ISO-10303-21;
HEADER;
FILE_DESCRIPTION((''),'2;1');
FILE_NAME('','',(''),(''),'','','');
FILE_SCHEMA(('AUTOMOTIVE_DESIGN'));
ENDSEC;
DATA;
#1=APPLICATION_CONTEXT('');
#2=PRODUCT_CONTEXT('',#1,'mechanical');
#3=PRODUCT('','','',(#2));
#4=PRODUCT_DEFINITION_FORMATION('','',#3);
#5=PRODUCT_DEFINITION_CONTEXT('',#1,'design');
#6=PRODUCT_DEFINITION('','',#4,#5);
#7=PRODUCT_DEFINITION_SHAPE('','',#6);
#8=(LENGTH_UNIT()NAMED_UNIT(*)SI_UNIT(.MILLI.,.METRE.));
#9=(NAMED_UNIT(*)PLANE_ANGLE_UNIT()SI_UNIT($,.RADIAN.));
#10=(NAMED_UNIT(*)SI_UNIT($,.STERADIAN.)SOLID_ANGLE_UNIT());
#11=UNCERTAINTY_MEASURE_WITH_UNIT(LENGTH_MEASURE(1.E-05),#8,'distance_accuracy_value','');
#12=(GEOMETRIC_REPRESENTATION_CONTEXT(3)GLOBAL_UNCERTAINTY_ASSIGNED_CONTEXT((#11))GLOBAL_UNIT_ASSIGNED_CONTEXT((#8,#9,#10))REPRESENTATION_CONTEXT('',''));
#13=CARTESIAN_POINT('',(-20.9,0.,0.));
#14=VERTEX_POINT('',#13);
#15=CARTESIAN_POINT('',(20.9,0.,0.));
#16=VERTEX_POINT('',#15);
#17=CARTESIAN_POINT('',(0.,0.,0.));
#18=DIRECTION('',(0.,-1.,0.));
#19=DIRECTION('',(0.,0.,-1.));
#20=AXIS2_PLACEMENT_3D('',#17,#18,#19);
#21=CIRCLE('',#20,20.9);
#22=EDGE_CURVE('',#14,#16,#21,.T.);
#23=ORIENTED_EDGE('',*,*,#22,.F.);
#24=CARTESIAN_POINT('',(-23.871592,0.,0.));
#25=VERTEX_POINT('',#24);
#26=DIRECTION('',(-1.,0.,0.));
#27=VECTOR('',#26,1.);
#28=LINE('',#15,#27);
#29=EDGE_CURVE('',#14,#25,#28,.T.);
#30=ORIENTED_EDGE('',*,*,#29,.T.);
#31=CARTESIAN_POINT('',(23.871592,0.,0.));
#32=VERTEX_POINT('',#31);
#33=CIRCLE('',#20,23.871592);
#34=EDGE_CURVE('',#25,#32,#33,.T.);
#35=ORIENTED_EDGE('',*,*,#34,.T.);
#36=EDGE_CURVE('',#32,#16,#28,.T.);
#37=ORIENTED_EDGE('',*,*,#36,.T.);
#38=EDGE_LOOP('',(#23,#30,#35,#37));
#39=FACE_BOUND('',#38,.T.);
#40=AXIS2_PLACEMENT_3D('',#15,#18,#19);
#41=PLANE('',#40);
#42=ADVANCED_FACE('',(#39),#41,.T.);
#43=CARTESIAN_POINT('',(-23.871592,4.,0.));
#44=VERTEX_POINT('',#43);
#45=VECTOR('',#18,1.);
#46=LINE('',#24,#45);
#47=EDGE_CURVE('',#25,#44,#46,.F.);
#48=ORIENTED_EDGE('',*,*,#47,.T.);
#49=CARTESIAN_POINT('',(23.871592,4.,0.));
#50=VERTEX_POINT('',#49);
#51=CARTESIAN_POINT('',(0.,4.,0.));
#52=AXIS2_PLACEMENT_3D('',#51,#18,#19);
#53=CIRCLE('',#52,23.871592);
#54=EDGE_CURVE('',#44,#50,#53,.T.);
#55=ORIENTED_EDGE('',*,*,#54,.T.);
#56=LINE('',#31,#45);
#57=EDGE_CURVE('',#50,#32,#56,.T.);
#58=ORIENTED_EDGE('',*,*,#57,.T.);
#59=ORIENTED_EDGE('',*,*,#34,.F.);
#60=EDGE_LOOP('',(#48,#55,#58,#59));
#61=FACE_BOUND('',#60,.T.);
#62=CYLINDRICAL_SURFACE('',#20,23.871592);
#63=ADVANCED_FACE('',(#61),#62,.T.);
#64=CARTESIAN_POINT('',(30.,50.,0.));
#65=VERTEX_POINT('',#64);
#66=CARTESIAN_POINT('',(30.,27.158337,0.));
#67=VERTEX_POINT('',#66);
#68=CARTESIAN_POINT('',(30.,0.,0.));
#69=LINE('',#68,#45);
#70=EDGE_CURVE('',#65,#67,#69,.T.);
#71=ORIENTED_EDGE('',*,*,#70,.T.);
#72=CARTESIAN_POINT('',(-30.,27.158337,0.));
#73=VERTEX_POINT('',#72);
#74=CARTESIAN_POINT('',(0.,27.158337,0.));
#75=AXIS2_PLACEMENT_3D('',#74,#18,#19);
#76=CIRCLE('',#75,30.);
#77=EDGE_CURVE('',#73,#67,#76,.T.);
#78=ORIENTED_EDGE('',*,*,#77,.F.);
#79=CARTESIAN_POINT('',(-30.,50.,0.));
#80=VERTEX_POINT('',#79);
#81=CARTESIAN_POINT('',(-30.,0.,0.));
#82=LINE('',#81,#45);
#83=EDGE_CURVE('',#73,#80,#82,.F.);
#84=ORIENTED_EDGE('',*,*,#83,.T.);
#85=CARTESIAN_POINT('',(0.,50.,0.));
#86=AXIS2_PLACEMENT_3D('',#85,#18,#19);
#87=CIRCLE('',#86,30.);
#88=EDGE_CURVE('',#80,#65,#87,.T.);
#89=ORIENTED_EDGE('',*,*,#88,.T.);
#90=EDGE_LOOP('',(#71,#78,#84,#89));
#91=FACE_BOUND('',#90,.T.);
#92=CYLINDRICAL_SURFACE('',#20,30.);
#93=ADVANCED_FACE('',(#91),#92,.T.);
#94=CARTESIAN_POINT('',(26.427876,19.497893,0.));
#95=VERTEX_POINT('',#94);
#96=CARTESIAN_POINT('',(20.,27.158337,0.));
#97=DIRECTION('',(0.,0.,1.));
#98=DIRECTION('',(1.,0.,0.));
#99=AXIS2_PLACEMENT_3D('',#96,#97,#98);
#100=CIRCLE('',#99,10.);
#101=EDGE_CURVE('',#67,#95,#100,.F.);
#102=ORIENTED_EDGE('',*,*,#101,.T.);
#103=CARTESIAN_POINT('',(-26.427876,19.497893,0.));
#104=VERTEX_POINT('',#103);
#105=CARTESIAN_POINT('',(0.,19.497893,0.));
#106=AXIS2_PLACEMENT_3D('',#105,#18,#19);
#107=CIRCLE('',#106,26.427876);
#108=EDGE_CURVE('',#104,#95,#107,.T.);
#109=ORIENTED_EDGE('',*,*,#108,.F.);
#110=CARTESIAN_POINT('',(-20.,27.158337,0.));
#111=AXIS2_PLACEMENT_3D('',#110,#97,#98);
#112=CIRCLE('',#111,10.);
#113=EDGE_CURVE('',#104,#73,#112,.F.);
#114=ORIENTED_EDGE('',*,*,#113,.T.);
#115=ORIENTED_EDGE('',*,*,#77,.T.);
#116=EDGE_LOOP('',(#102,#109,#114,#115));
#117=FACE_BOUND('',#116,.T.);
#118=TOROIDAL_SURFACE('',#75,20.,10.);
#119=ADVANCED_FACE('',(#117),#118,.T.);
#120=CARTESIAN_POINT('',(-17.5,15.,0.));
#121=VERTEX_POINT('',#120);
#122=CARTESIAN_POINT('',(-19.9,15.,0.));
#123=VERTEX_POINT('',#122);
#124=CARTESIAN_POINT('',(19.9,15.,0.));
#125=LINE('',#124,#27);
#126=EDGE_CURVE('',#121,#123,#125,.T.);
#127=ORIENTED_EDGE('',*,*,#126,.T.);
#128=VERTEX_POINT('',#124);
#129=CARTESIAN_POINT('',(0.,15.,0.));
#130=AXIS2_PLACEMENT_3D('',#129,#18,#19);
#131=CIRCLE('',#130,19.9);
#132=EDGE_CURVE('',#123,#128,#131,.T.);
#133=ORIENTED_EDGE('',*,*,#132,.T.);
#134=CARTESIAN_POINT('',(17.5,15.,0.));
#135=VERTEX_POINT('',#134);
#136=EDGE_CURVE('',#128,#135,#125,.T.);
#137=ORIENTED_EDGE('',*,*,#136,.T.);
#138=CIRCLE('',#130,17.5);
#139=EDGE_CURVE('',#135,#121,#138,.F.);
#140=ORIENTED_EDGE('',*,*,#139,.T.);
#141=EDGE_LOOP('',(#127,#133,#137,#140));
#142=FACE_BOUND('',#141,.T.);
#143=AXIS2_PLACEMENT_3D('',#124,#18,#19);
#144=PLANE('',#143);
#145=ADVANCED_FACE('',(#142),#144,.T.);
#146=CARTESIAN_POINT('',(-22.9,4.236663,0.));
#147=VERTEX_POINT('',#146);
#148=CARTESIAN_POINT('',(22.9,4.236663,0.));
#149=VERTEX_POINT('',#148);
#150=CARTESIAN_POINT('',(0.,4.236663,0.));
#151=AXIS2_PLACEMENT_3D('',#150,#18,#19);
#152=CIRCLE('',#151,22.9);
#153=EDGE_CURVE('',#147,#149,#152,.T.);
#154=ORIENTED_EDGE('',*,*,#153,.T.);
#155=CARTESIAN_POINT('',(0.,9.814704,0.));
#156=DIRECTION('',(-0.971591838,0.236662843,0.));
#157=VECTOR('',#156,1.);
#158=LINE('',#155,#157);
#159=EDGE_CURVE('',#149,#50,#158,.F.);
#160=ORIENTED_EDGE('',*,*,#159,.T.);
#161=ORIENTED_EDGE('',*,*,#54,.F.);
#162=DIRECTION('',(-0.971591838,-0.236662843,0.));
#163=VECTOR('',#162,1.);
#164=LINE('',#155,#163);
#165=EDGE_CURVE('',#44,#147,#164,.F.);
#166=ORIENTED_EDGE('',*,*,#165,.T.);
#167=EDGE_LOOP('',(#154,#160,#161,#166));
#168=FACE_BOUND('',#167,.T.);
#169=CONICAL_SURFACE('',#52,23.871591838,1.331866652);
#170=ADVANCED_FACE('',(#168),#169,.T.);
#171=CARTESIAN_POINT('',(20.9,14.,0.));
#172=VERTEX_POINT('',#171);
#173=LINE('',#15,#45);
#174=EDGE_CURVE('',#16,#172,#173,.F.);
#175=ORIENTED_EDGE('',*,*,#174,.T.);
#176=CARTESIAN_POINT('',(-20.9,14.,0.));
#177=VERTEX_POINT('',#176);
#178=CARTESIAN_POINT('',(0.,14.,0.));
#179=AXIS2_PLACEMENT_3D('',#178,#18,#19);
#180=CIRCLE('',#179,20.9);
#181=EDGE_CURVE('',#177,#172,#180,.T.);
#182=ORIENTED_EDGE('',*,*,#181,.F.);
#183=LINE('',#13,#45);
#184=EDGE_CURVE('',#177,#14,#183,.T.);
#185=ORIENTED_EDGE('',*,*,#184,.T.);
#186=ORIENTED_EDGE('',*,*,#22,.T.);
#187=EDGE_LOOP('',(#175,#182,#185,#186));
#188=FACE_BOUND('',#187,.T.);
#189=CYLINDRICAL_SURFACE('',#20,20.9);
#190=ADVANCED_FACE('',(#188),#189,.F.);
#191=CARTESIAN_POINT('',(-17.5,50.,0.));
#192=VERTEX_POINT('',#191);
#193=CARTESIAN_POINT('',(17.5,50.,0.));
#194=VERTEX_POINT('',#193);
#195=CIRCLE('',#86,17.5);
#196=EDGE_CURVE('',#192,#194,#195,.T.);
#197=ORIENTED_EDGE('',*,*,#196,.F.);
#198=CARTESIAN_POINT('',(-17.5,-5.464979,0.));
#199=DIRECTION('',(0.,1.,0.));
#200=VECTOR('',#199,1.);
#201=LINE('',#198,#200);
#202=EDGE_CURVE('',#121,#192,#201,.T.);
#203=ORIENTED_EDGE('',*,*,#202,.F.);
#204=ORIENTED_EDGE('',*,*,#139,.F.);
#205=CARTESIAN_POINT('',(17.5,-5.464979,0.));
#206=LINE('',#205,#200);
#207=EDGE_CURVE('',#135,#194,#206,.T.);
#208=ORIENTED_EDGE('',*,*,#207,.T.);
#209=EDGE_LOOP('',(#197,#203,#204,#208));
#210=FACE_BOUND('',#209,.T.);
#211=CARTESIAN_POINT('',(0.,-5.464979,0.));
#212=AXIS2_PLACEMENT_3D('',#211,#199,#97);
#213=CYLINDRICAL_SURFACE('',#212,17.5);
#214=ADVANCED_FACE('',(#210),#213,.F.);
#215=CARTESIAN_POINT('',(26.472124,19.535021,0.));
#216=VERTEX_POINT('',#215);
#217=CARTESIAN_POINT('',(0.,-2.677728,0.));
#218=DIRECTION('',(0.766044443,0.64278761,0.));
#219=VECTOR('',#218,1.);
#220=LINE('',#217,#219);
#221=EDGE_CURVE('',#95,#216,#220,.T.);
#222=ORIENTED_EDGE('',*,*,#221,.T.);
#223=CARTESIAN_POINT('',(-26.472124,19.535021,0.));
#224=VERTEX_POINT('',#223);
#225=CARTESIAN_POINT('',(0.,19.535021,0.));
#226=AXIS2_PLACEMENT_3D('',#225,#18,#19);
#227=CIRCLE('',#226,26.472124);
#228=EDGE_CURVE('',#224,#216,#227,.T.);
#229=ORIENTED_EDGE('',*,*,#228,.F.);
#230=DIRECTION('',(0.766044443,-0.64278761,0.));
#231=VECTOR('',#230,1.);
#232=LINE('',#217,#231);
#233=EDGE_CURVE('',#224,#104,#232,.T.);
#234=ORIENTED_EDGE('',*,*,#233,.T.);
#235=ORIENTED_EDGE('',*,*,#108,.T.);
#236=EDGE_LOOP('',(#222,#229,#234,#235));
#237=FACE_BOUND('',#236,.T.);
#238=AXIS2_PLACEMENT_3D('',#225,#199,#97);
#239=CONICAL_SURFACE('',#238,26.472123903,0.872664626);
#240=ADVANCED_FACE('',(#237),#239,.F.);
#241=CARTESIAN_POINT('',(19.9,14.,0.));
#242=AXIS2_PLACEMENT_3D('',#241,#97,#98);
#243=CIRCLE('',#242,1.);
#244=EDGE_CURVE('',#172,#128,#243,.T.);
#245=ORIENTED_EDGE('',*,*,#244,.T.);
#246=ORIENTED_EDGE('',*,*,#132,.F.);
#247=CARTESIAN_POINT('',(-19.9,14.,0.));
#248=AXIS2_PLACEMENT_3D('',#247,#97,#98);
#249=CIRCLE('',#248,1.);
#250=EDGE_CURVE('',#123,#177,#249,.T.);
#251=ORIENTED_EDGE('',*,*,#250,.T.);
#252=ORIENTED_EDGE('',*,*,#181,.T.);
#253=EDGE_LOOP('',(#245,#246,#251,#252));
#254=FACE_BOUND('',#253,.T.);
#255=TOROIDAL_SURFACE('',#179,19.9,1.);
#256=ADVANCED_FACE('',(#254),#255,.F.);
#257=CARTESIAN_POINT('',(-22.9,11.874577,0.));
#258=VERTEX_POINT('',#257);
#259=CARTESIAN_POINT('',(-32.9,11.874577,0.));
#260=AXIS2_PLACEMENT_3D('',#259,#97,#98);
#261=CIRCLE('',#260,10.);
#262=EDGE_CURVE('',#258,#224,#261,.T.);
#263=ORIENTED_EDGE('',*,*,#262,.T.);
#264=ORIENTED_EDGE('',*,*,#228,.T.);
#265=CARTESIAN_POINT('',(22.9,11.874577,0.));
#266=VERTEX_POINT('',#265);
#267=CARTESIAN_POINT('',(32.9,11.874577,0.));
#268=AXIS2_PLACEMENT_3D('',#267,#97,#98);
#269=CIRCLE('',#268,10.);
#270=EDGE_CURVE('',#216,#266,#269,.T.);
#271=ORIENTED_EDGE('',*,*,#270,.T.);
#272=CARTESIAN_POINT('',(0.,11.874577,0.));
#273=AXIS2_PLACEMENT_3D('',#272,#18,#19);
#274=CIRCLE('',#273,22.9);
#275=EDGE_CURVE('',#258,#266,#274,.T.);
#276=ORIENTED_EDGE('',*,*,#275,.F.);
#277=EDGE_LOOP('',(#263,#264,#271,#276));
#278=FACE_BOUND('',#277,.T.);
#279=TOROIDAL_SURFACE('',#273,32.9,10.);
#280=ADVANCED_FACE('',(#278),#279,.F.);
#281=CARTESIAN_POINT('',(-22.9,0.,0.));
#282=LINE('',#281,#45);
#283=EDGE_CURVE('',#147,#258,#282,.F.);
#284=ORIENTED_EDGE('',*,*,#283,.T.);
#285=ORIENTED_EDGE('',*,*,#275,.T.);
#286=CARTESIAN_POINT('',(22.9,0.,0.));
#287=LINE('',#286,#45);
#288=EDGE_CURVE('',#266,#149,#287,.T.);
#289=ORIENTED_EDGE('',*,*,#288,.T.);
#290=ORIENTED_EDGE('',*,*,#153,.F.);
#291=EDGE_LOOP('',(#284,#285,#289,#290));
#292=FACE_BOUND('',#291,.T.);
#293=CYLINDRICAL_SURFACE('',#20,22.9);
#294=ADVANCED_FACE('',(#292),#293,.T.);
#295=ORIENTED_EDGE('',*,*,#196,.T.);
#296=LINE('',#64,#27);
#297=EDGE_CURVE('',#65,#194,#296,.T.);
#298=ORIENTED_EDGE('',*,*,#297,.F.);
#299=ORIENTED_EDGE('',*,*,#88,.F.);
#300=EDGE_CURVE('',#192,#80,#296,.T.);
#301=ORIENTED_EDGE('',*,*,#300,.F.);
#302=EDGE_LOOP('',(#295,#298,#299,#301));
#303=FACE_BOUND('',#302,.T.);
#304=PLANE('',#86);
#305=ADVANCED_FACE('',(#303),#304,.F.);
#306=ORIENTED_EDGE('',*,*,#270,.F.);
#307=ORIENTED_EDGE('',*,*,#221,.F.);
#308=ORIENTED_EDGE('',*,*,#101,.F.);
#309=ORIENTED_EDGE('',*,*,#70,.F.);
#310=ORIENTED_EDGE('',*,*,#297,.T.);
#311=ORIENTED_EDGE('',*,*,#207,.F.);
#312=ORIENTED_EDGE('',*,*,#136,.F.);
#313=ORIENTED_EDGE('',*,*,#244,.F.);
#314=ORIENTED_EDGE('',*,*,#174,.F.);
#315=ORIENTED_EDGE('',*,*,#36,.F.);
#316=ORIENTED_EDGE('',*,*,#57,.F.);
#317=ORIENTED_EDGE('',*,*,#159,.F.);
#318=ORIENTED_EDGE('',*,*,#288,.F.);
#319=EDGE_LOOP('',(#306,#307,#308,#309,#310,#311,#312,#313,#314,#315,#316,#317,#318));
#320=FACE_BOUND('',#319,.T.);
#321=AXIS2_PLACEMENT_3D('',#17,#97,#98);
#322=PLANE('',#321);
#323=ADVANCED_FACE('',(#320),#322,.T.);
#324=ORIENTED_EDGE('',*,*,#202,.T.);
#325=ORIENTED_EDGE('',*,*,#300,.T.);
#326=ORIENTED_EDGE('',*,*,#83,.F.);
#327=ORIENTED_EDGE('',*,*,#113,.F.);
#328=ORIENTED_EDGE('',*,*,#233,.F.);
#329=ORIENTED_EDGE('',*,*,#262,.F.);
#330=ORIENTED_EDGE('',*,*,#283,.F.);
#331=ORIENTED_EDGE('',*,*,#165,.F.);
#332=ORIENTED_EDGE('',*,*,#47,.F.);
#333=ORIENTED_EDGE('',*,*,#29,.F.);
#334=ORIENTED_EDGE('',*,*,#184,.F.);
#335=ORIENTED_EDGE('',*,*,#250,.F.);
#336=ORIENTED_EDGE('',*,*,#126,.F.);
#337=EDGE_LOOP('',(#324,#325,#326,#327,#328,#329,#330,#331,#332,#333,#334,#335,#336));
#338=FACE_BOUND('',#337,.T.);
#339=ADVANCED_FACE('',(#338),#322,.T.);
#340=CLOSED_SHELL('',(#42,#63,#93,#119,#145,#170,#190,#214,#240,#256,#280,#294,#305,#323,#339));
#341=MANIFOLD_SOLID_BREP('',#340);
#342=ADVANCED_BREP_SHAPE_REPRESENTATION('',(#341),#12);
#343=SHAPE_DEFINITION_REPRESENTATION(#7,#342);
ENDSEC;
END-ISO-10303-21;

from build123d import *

# Parameters (mm, degrees)
CUT_EXTRUDE3_DEPTH           = 25
CUT_EXTRUDE3_DEPTH_BACK      = 40
CUT_EXTRUDE5_START           = -5
CUT_EXTRUDE5_DEPTH           = 5
BOSS_EXTRUDE2_DEPTH          = 5
SKETCH14_R                   = 1
BOSS_EXTRUDE3_DEPTH          = 3
BOSS_EXTRUDE4_START          = 3
SKETCH15_R                   = 1
BOSS_EXTRUDE4_DEPTH          = 3
CUT_EXTRUDE6_DEPTH           = 22
SKETCH17_W                   = 7
SKETCH17_H                   = 20.303986046
CUT_REVOLVE1_ANGLE           = 45
CUT_REVOLVE1_OTHER_WAY_ANGLE = 45
INTERSECT1_OUTLINE_W         = 62
INTERSECT1_OUTLINE_H         = 54
INTERSECT1_DEPTH             = 31
INTERSECT1_START             = -5
INTERSECT1_2_OUTLINE_W       = 12
INTERSECT1_2_OUTLINE_H       = 4
INTERSECT1_2_DEPTH           = 5


with BuildPart() as part:
    # Sketch1 → Revolve1 (revolve)
    with BuildSketch(Plane.XY, mode=Mode.PRIVATE) as revolve1_sk:
        with BuildLine():
            Line((20.9, 0), (23.871591838, 0))
            Line((23.871591838, 0), (23.871591838, 4))
            Line((23.871591838, 4), (22.9, 4.236662843))
            Line((22.9, 4.236662843), (22.9, 11.874576818))
            ThreePointArc((22.9, 11.874576818), (23.83692213, 16.100759435), (26.472123903, 19.535021249))
            Line((26.472123903, 19.535021249), (26.427876097, 19.497892931))
            ThreePointArc((26.427876097, 19.497892931), (29.06307787, 22.932154745), (30, 27.158337362))
            Line((30, 27.158337362), (30, 50))
            ThreePointArc((30, 50), (28.828427125, 52.828427125), (26, 54))
            Line((26, 54), (0, 54))
            Line((0, 54), (0, 15))
            Line((0, 15), (19.9, 15))
            ThreePointArc((19.9, 15), (20.607106781, 14.707106781), (20.9, 14))
            Line((20.9, 14), (20.9, 0))
        make_face()
    revolve(revolve1_sk.sketch.rotate(Axis((0, 0, 0), (0, 1, 0)), 90), axis=Axis((0, 0, 0), (0, 1, 0)))

    # Sketch11 → Cut-Extrude3 (cut, two sides: drawn at the far end of the back side and taken through both)
    with BuildSketch(Plane(origin=(0, 19.535021249, 0), x_dir=(-1, 0, 0), z_dir=(0, -1, 0)).offset(-CUT_EXTRUDE3_DEPTH_BACK)):
        with BuildLine():
            Line((-17.5, 0), (17.5, 0))
            ThreePointArc((17.5, 0), (0, 17.5), (-17.5, 0))
        make_face()
    extrude(amount=CUT_EXTRUDE3_DEPTH + CUT_EXTRUDE3_DEPTH_BACK, mode=Mode.SUBTRACT)

    # Sketch9 → Cut-Extrude5 (cut)
    with BuildSketch(Plane(origin=(0, 50, 0), x_dir=(-1, 0, 0), z_dir=(0, -1, 0)).offset(CUT_EXTRUDE5_START)):
        with BuildLine():
            Line((-30, 0), (30, 0))
            ThreePointArc((30, 0), (0, 30), (-30, 0))
        make_face()
    extrude(amount=CUT_EXTRUDE5_DEPTH, mode=Mode.SUBTRACT)

    # Sketch13 → Boss-Extrude2 (add)
    with BuildSketch(Plane(origin=(0, 0, 0), x_dir=(-1, 0, 0), z_dir=(0, 0, -1))):
        with BuildLine():
            Line((22.5, 53.5), (26.5, 53.5))
            ThreePointArc((26.5, 53.5), (26.853553391, 53.353553391), (27, 53))
            Line((27, 53), (27, 51))
            ThreePointArc((27, 51), (26.853553391, 50.646446609), (26.5, 50.5))
            Line((26.5, 50.5), (22.5, 50.5))
            ThreePointArc((22.5, 50.5), (22.146446609, 50.646446609), (22, 51))
            Line((22, 51), (22, 53))
            ThreePointArc((22, 53), (22.146446609, 53.353553391), (22.5, 53.5))
        make_face()
        with BuildLine():
            Line((-26.5, 53.5), (-22.5, 53.5))
            ThreePointArc((-22.5, 53.5), (-22.146446609, 53.353553391), (-22, 53))
            Line((-22, 53), (-22, 51))
            ThreePointArc((-22, 51), (-22.146446609, 50.646446609), (-22.5, 50.5))
            Line((-22.5, 50.5), (-26.5, 50.5))
            ThreePointArc((-26.5, 50.5), (-26.853553391, 50.646446609), (-27, 51))
            Line((-27, 51), (-27, 53))
            ThreePointArc((-27, 53), (-26.853553391, 53.353553391), (-26.5, 53.5))
        make_face()
    extrude(amount=BOSS_EXTRUDE2_DEPTH)

    # Sketch14 → Boss-Extrude3 (add)
    with BuildSketch(Plane.ZY.offset(-22)):
        with Locations(Location((-3, 52, 0), (0, 0, 270))):
            Circle(SKETCH14_R)
    extrude(amount=BOSS_EXTRUDE3_DEPTH)

    # Sketch15 → Boss-Extrude4 (add)
    with BuildSketch(Plane(origin=(-22, 0, 0), x_dir=(0, 0, -1), z_dir=(1, 0, 0)).offset(BOSS_EXTRUDE4_START)):
        with Locations(Location((3, 52, 0), (0, 0, 270))):
            Circle(SKETCH15_R)
    extrude(amount=-BOSS_EXTRUDE4_DEPTH)

    # Sketch16 → Cut-Extrude6 (cut)
    with BuildSketch(Plane(origin=(0, 50, 0), x_dir=(-1, 0, 0), z_dir=(0, -1, 0))):
        with BuildLine():
            Line((25.690465157, -4), (-25.690465157, -4))
            ThreePointArc((-25.690465157, -4), (0, -26), (25.690465157, -4))
        make_face()
    extrude(amount=CUT_EXTRUDE6_DEPTH, mode=Mode.SUBTRACT)

    # Sketch17 → Cut-Revolve1 (revolve, cut)
    with BuildSketch(Plane(origin=(0, 0, 0), x_dir=(0, 0, -1), z_dir=(1, 0, 0))):
        with Locations((-28.883918314, 38.580330385)):
            Rectangle(SKETCH17_W, SKETCH17_H)
    revolve(axis=Axis((0, 0, 0), (0, 0.9999633813881498, 0.008557796607647805)), revolution_arc=CUT_REVOLVE1_ANGLE, mode=Mode.SUBTRACT)

    # Sketch17 → Cut-Revolve1 other way (revolve, cut)
    with BuildSketch(Plane(origin=(0, 0, 0), x_dir=(0, 0, -1), z_dir=(1, 0, 0))):
        with Locations((-28.883918314, 38.580330385)):
            Rectangle(SKETCH17_W, SKETCH17_H)
    revolve(axis=Axis((0, 0, 0), (0, -0.9999633813881498, -0.008557796607647805)), revolution_arc=CUT_REVOLVE1_OTHER_WAY_ANGLE, mode=Mode.SUBTRACT)

    # Intersect1: read off the stored shape, not the designer's step
    # Intersect1 outline → Intersect1 (cut)
    with BuildSketch(Plane.XY):
        with Locations((0, 27)):
            Rectangle(INTERSECT1_OUTLINE_W, INTERSECT1_OUTLINE_H)
    extrude(amount=INTERSECT1_DEPTH, mode=Mode.SUBTRACT)

    # Intersect1 2 outline → Intersect1 2 (cut)
    with BuildSketch(Plane.XY.offset(INTERSECT1_START)):
        with Locations((-25, 52)):
            Rectangle(INTERSECT1_2_OUTLINE_W, INTERSECT1_2_OUTLINE_H)
        with Locations((25, 52)):
            Rectangle(INTERSECT1_2_OUTLINE_W, INTERSECT1_2_OUTLINE_H)
    extrude(amount=INTERSECT1_2_DEPTH, mode=Mode.SUBTRACT)


solid = part.part
